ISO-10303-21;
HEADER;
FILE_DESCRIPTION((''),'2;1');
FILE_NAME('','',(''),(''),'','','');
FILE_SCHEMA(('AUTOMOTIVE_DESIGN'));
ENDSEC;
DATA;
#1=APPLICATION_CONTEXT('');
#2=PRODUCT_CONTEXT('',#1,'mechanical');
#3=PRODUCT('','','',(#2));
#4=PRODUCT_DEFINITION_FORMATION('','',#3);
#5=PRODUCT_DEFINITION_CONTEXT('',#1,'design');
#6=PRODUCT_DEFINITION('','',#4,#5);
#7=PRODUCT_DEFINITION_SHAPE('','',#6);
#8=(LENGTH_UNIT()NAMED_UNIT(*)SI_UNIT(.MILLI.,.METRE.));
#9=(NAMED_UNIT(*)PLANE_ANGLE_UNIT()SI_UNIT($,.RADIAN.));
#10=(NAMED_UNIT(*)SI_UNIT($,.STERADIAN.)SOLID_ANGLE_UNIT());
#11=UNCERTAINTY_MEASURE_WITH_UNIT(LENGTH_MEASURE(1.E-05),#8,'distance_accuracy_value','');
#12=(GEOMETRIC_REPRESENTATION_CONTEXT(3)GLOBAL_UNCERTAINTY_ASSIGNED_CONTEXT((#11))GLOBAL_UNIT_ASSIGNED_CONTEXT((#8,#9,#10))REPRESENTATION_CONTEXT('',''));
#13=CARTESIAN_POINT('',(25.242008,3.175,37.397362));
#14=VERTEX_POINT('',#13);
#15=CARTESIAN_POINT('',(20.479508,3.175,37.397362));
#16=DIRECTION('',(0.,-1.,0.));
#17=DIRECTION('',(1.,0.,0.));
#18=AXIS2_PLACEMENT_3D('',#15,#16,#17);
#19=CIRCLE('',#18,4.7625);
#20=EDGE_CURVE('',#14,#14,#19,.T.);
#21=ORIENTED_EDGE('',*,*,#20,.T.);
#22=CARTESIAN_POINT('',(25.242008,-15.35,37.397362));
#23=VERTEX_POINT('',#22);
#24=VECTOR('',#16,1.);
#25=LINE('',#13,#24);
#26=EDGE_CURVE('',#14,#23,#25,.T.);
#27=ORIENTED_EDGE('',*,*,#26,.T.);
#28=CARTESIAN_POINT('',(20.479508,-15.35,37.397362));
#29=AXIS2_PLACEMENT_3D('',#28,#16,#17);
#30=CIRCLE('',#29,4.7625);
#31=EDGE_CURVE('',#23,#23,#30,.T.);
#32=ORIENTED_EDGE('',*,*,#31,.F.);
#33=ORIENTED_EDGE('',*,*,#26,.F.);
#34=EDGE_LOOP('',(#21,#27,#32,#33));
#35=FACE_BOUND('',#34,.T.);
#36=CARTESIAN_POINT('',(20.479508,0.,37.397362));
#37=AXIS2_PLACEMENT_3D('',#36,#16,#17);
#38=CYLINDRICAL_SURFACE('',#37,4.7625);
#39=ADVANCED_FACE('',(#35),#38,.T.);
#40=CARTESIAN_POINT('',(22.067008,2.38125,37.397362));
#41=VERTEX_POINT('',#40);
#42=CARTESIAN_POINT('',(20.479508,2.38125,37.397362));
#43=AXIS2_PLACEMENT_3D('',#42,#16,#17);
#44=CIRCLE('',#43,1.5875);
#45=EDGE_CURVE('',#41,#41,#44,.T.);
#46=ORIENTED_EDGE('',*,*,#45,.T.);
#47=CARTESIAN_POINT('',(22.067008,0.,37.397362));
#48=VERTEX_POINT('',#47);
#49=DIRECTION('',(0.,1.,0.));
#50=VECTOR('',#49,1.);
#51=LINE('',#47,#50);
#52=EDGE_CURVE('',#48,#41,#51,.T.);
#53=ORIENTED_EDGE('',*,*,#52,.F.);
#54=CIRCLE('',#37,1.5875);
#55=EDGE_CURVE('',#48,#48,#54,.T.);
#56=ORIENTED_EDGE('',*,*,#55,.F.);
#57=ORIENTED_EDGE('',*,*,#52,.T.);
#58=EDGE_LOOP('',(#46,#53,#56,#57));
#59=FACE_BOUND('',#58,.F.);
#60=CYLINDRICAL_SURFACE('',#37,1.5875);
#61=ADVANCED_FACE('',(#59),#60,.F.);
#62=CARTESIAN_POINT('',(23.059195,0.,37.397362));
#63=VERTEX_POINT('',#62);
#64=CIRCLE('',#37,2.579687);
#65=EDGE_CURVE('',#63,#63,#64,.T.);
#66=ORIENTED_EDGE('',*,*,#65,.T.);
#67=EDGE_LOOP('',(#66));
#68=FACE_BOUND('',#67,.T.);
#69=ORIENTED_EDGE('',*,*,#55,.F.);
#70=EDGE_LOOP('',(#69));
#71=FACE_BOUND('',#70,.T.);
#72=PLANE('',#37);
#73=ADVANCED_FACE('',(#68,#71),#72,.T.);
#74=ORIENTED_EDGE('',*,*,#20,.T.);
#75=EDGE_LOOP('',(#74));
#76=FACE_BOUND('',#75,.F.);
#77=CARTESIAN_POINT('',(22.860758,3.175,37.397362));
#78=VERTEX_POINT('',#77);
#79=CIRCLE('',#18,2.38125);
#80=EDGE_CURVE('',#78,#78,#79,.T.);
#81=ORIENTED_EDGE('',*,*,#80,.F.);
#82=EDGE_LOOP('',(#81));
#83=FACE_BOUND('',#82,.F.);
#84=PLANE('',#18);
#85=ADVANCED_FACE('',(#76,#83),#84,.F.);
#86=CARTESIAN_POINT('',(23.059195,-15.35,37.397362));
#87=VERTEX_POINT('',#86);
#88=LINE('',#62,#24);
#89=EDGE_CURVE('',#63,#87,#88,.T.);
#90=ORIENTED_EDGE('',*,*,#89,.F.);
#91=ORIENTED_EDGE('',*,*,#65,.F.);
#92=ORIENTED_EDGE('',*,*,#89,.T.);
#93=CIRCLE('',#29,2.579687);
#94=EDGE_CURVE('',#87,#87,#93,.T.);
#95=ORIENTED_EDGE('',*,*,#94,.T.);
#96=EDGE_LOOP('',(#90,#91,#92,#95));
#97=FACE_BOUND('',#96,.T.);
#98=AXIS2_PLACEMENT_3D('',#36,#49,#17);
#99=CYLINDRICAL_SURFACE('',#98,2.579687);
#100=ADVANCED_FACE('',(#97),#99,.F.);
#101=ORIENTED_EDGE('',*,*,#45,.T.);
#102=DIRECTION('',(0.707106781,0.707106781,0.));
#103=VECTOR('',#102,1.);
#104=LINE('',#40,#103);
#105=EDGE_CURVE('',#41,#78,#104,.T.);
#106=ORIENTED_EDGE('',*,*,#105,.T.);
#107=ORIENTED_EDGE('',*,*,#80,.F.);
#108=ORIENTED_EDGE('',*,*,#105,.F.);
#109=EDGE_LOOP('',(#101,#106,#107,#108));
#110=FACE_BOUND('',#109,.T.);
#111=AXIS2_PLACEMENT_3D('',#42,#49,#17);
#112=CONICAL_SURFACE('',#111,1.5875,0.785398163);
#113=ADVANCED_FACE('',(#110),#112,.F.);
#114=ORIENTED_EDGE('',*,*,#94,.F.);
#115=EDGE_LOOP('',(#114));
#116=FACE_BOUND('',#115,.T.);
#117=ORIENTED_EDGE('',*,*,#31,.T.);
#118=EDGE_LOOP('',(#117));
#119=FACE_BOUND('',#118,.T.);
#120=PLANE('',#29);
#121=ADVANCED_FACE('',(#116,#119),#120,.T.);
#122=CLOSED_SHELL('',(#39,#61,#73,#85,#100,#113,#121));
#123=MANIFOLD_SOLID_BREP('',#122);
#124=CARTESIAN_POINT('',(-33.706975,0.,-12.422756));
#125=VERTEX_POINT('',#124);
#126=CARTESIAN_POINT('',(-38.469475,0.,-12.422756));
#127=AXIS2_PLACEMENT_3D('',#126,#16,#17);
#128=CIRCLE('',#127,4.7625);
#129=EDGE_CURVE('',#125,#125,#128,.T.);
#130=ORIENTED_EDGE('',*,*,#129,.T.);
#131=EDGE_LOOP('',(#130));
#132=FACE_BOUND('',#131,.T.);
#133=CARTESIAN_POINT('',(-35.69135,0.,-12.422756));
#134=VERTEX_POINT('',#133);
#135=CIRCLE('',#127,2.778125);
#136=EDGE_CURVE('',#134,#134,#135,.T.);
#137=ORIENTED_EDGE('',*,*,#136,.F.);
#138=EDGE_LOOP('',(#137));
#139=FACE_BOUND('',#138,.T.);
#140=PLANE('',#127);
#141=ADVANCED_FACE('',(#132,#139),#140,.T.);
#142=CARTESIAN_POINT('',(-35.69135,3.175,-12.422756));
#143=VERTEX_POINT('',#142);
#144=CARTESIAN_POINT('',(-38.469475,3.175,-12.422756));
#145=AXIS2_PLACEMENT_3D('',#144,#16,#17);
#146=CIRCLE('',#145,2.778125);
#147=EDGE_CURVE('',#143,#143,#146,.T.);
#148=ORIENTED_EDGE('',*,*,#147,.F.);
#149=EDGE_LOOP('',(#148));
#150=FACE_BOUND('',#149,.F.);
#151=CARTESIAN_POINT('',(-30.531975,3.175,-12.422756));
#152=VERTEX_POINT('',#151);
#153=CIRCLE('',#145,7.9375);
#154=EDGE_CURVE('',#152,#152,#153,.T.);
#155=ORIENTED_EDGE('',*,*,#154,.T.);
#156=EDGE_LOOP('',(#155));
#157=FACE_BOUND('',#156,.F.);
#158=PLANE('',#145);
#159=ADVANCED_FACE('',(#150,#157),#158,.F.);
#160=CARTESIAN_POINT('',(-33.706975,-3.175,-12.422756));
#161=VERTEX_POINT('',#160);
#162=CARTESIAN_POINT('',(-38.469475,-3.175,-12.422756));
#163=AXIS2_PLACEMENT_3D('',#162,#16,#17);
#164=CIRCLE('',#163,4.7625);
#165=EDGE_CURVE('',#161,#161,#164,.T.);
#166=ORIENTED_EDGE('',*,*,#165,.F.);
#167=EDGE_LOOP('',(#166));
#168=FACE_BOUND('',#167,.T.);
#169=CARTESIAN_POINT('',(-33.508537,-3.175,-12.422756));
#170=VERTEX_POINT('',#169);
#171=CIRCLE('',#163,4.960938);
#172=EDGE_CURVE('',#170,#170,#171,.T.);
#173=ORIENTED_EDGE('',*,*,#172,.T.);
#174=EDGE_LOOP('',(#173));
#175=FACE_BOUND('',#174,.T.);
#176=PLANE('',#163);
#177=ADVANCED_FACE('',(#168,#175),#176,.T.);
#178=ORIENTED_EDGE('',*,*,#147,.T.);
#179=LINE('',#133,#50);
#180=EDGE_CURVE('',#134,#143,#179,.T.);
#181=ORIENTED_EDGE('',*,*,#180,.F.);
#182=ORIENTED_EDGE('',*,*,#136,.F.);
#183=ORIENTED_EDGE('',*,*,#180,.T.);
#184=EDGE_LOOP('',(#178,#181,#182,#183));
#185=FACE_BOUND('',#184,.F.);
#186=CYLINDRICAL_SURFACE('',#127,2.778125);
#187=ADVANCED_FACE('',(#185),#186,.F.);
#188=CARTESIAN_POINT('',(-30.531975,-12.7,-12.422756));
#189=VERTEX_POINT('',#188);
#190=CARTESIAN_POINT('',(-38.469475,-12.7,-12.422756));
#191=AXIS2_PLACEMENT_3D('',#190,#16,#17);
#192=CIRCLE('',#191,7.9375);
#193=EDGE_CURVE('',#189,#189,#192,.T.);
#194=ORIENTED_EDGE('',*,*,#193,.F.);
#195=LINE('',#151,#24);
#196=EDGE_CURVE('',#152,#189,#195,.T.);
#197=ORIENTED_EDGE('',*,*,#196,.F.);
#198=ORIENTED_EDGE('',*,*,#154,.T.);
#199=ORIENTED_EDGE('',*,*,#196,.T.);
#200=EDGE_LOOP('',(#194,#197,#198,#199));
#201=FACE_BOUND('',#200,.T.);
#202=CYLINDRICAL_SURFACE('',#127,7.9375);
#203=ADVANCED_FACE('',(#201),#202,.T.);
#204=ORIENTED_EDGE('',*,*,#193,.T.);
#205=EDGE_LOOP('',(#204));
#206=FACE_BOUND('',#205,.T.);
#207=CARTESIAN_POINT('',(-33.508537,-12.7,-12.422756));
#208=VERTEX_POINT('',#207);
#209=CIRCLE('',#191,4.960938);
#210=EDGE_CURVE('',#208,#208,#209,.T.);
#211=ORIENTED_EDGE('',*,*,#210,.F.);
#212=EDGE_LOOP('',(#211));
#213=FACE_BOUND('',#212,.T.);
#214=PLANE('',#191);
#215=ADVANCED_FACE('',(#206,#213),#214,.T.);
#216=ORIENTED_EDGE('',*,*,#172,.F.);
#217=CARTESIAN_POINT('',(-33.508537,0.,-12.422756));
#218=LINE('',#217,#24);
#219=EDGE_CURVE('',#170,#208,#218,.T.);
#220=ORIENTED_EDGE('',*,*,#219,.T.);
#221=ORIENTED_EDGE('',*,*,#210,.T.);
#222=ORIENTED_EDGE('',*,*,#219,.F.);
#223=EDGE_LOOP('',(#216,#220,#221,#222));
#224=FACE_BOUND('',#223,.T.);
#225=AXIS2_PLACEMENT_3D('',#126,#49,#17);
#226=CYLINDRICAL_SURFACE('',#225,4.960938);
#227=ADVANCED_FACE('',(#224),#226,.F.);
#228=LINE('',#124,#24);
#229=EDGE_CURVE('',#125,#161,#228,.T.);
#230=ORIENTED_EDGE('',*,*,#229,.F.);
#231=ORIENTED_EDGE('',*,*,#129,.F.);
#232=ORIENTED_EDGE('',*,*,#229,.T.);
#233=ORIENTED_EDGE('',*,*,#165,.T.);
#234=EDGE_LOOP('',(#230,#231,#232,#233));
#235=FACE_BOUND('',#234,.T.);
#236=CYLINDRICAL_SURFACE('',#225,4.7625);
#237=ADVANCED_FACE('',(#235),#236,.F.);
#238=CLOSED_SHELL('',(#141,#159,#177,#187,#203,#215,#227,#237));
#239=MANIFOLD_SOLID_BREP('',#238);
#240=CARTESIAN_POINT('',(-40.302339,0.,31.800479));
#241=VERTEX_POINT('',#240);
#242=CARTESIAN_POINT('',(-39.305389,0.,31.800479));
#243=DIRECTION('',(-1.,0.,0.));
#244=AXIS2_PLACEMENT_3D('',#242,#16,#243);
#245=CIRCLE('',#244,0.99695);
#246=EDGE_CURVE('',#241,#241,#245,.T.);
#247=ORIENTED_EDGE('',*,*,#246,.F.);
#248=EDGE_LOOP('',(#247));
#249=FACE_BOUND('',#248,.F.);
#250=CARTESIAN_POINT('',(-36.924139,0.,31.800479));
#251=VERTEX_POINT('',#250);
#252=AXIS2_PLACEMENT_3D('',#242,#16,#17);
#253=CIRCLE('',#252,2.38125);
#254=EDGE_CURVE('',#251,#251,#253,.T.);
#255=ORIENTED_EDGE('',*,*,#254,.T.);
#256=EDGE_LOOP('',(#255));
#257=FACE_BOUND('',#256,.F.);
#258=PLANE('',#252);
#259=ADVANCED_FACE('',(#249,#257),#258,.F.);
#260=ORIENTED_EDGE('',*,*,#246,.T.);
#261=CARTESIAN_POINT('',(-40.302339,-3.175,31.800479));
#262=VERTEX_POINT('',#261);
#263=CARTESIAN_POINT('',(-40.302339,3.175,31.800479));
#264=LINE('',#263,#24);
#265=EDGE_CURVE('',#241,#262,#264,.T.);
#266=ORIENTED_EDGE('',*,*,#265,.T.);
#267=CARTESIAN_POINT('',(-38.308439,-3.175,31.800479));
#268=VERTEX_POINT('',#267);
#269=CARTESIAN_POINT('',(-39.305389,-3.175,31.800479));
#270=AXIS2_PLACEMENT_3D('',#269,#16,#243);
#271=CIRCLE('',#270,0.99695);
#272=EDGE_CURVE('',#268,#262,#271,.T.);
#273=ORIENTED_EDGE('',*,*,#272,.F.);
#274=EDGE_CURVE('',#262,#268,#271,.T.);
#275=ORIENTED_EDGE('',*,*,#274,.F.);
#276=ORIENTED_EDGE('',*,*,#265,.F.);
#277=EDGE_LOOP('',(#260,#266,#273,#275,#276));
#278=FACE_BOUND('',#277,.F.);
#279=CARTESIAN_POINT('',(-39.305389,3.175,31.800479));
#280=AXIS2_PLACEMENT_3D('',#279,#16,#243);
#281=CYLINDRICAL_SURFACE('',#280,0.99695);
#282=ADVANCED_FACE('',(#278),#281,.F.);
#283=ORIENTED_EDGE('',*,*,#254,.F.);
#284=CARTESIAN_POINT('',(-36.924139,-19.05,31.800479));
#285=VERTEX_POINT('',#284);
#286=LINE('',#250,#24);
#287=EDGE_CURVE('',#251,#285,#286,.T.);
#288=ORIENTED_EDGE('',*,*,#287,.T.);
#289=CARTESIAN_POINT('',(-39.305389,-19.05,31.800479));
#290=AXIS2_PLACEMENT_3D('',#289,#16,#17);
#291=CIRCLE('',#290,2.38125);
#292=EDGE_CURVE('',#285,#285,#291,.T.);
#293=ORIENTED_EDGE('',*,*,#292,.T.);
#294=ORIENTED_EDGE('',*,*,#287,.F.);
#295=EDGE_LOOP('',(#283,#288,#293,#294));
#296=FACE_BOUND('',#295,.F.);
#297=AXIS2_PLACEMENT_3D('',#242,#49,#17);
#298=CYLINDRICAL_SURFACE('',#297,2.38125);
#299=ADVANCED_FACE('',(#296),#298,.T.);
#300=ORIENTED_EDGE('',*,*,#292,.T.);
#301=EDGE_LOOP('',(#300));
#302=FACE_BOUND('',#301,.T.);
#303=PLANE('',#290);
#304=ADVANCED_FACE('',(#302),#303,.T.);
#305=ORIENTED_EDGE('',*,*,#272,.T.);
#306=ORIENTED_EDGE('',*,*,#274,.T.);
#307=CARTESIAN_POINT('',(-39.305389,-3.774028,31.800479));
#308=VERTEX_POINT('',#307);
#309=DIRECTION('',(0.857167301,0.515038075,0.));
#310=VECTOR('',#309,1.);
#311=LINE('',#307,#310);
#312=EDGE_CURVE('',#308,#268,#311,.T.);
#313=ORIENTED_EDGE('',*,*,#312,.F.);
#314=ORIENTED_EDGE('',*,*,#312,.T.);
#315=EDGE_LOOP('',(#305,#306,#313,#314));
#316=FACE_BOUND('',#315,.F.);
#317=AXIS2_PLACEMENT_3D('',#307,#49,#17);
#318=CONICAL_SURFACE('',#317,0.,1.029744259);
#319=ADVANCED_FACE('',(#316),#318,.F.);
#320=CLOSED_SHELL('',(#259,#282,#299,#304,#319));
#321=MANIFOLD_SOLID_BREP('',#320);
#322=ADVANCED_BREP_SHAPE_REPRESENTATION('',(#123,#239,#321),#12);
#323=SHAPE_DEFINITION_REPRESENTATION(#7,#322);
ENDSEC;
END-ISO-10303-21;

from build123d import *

# Parameters (mm, degrees)
F0_R      = 2.38125
F1_DEPTH  = 19.05
F2_R      = 4.7625
F2_R_2    = 2.5796875
F3_DEPTH  = 15.35
F2_R_3    = 1.5875
F4_DEPTH  = 3.175
F5_SIZE   = 0.79375
F6_R      = 7.9375
F6_R_2    = 4.9609375
F7_DEPTH  = 12.7
F6_R_3    = 4.7625
F6_R_4    = 2.778125
F8_DEPTH  = 3.175
F9_DEPTH  = 3.175
F10_D     = 1.9939
F10_DEPTH = 3.175
F10_TIP   = 0.5990279941


# Not quite as in the source:
# - a length typed as a fraction of an inch, garbled in the dataset ("3 / 203.2 mm" for 3/8 in), is restored


with BuildPart() as f1:
    # F0 (on Front) → F1 (new body)
    with BuildSketch(Plane.XZ):
        with Locations((-39.3053889275, 31.8004786968)):
            Circle(F0_R)
    extrude(amount=F1_DEPTH)

    # F10
    with Locations(Plane(origin=(0, 0, 0), x_dir=(1, 0, 0), z_dir=(0, 1, 0))):
        with Locations((-39.3053889275, -31.8004786968)):
            Hole(F10_D / 2, depth=F10_DEPTH)
            with Locations((0, 0, -(F10_DEPTH + F10_TIP / 2))):  # 118° drill point
                Cone(0, F10_D / 2, F10_TIP, mode=Mode.SUBTRACT)


with BuildPart() as f3:
    # F2 (on Front) → F3 (new body)
    with BuildSketch(Plane.XZ):
        with Locations((20.4795077443, 37.3973622918)):
            Circle(F2_R)
        with Locations((20.4795077443, 37.3973622918)):
            Circle(F2_R_2, mode=Mode.SUBTRACT)
    extrude(amount=F3_DEPTH)

    # F2 (on Front) → F4 (join)
    with BuildSketch(Plane.XZ):
        with Locations((20.4795077443, 37.3973622918)):
            Circle(F2_R)
        with Locations((20.4795077443, 37.3973622918)):
            Circle(F2_R_2, mode=Mode.SUBTRACT)
        with Locations((20.4795077443, 37.3973622918)):
            Circle(F2_R_2)
        with Locations((20.4795077443, 37.3973622918)):
            Circle(F2_R_3, mode=Mode.SUBTRACT)
    extrude(amount=-F4_DEPTH)

    # F5
    f5_edges = [f3.edges().sort_by_distance(p)[0] for p in [
        (18.892008, 3.175, 37.397362),
    ]]
    chamfer(f5_edges, length=F5_SIZE)


with BuildPart() as f7:
    # F6 (on Front) → F7 (new body)
    with BuildSketch(Plane.XZ):
        with Locations((-38.4694747627, -12.4227562919)):
            Circle(F6_R)
        with Locations((-38.4694747627, -12.4227562919)):
            Circle(F6_R_2, mode=Mode.SUBTRACT)
    extrude(amount=F7_DEPTH)

    # F6 (on Front) → F8 (join)
    with BuildSketch(Plane.XZ):
        with Locations((-38.4694747627, -12.4227562919)):
            Circle(F6_R)
        with Locations((-38.4694747627, -12.4227562919)):
            Circle(F6_R_2, mode=Mode.SUBTRACT)
        with Locations((-38.4694747627, -12.4227562919)):
            Circle(F6_R_2)
        with Locations((-38.4694747627, -12.4227562919)):
            Circle(F6_R_3, mode=Mode.SUBTRACT)
        with Locations((-38.4694747627, -12.4227562919)):
            Circle(F6_R_3)
        with Locations((-38.4694747627, -12.4227562919)):
            Circle(F6_R_4, mode=Mode.SUBTRACT)
    extrude(amount=-F8_DEPTH)

    # F6 (on Front) → F9 (join)
    with BuildSketch(Plane.XZ):
        with Locations((-38.4694747627, -12.4227562919)):
            Circle(F6_R_2)
        with Locations((-38.4694747627, -12.4227562919)):
            Circle(F6_R_3, mode=Mode.SUBTRACT)
    extrude(amount=F9_DEPTH)


solid = Compound([f1.part, f3.part, f7.part])
